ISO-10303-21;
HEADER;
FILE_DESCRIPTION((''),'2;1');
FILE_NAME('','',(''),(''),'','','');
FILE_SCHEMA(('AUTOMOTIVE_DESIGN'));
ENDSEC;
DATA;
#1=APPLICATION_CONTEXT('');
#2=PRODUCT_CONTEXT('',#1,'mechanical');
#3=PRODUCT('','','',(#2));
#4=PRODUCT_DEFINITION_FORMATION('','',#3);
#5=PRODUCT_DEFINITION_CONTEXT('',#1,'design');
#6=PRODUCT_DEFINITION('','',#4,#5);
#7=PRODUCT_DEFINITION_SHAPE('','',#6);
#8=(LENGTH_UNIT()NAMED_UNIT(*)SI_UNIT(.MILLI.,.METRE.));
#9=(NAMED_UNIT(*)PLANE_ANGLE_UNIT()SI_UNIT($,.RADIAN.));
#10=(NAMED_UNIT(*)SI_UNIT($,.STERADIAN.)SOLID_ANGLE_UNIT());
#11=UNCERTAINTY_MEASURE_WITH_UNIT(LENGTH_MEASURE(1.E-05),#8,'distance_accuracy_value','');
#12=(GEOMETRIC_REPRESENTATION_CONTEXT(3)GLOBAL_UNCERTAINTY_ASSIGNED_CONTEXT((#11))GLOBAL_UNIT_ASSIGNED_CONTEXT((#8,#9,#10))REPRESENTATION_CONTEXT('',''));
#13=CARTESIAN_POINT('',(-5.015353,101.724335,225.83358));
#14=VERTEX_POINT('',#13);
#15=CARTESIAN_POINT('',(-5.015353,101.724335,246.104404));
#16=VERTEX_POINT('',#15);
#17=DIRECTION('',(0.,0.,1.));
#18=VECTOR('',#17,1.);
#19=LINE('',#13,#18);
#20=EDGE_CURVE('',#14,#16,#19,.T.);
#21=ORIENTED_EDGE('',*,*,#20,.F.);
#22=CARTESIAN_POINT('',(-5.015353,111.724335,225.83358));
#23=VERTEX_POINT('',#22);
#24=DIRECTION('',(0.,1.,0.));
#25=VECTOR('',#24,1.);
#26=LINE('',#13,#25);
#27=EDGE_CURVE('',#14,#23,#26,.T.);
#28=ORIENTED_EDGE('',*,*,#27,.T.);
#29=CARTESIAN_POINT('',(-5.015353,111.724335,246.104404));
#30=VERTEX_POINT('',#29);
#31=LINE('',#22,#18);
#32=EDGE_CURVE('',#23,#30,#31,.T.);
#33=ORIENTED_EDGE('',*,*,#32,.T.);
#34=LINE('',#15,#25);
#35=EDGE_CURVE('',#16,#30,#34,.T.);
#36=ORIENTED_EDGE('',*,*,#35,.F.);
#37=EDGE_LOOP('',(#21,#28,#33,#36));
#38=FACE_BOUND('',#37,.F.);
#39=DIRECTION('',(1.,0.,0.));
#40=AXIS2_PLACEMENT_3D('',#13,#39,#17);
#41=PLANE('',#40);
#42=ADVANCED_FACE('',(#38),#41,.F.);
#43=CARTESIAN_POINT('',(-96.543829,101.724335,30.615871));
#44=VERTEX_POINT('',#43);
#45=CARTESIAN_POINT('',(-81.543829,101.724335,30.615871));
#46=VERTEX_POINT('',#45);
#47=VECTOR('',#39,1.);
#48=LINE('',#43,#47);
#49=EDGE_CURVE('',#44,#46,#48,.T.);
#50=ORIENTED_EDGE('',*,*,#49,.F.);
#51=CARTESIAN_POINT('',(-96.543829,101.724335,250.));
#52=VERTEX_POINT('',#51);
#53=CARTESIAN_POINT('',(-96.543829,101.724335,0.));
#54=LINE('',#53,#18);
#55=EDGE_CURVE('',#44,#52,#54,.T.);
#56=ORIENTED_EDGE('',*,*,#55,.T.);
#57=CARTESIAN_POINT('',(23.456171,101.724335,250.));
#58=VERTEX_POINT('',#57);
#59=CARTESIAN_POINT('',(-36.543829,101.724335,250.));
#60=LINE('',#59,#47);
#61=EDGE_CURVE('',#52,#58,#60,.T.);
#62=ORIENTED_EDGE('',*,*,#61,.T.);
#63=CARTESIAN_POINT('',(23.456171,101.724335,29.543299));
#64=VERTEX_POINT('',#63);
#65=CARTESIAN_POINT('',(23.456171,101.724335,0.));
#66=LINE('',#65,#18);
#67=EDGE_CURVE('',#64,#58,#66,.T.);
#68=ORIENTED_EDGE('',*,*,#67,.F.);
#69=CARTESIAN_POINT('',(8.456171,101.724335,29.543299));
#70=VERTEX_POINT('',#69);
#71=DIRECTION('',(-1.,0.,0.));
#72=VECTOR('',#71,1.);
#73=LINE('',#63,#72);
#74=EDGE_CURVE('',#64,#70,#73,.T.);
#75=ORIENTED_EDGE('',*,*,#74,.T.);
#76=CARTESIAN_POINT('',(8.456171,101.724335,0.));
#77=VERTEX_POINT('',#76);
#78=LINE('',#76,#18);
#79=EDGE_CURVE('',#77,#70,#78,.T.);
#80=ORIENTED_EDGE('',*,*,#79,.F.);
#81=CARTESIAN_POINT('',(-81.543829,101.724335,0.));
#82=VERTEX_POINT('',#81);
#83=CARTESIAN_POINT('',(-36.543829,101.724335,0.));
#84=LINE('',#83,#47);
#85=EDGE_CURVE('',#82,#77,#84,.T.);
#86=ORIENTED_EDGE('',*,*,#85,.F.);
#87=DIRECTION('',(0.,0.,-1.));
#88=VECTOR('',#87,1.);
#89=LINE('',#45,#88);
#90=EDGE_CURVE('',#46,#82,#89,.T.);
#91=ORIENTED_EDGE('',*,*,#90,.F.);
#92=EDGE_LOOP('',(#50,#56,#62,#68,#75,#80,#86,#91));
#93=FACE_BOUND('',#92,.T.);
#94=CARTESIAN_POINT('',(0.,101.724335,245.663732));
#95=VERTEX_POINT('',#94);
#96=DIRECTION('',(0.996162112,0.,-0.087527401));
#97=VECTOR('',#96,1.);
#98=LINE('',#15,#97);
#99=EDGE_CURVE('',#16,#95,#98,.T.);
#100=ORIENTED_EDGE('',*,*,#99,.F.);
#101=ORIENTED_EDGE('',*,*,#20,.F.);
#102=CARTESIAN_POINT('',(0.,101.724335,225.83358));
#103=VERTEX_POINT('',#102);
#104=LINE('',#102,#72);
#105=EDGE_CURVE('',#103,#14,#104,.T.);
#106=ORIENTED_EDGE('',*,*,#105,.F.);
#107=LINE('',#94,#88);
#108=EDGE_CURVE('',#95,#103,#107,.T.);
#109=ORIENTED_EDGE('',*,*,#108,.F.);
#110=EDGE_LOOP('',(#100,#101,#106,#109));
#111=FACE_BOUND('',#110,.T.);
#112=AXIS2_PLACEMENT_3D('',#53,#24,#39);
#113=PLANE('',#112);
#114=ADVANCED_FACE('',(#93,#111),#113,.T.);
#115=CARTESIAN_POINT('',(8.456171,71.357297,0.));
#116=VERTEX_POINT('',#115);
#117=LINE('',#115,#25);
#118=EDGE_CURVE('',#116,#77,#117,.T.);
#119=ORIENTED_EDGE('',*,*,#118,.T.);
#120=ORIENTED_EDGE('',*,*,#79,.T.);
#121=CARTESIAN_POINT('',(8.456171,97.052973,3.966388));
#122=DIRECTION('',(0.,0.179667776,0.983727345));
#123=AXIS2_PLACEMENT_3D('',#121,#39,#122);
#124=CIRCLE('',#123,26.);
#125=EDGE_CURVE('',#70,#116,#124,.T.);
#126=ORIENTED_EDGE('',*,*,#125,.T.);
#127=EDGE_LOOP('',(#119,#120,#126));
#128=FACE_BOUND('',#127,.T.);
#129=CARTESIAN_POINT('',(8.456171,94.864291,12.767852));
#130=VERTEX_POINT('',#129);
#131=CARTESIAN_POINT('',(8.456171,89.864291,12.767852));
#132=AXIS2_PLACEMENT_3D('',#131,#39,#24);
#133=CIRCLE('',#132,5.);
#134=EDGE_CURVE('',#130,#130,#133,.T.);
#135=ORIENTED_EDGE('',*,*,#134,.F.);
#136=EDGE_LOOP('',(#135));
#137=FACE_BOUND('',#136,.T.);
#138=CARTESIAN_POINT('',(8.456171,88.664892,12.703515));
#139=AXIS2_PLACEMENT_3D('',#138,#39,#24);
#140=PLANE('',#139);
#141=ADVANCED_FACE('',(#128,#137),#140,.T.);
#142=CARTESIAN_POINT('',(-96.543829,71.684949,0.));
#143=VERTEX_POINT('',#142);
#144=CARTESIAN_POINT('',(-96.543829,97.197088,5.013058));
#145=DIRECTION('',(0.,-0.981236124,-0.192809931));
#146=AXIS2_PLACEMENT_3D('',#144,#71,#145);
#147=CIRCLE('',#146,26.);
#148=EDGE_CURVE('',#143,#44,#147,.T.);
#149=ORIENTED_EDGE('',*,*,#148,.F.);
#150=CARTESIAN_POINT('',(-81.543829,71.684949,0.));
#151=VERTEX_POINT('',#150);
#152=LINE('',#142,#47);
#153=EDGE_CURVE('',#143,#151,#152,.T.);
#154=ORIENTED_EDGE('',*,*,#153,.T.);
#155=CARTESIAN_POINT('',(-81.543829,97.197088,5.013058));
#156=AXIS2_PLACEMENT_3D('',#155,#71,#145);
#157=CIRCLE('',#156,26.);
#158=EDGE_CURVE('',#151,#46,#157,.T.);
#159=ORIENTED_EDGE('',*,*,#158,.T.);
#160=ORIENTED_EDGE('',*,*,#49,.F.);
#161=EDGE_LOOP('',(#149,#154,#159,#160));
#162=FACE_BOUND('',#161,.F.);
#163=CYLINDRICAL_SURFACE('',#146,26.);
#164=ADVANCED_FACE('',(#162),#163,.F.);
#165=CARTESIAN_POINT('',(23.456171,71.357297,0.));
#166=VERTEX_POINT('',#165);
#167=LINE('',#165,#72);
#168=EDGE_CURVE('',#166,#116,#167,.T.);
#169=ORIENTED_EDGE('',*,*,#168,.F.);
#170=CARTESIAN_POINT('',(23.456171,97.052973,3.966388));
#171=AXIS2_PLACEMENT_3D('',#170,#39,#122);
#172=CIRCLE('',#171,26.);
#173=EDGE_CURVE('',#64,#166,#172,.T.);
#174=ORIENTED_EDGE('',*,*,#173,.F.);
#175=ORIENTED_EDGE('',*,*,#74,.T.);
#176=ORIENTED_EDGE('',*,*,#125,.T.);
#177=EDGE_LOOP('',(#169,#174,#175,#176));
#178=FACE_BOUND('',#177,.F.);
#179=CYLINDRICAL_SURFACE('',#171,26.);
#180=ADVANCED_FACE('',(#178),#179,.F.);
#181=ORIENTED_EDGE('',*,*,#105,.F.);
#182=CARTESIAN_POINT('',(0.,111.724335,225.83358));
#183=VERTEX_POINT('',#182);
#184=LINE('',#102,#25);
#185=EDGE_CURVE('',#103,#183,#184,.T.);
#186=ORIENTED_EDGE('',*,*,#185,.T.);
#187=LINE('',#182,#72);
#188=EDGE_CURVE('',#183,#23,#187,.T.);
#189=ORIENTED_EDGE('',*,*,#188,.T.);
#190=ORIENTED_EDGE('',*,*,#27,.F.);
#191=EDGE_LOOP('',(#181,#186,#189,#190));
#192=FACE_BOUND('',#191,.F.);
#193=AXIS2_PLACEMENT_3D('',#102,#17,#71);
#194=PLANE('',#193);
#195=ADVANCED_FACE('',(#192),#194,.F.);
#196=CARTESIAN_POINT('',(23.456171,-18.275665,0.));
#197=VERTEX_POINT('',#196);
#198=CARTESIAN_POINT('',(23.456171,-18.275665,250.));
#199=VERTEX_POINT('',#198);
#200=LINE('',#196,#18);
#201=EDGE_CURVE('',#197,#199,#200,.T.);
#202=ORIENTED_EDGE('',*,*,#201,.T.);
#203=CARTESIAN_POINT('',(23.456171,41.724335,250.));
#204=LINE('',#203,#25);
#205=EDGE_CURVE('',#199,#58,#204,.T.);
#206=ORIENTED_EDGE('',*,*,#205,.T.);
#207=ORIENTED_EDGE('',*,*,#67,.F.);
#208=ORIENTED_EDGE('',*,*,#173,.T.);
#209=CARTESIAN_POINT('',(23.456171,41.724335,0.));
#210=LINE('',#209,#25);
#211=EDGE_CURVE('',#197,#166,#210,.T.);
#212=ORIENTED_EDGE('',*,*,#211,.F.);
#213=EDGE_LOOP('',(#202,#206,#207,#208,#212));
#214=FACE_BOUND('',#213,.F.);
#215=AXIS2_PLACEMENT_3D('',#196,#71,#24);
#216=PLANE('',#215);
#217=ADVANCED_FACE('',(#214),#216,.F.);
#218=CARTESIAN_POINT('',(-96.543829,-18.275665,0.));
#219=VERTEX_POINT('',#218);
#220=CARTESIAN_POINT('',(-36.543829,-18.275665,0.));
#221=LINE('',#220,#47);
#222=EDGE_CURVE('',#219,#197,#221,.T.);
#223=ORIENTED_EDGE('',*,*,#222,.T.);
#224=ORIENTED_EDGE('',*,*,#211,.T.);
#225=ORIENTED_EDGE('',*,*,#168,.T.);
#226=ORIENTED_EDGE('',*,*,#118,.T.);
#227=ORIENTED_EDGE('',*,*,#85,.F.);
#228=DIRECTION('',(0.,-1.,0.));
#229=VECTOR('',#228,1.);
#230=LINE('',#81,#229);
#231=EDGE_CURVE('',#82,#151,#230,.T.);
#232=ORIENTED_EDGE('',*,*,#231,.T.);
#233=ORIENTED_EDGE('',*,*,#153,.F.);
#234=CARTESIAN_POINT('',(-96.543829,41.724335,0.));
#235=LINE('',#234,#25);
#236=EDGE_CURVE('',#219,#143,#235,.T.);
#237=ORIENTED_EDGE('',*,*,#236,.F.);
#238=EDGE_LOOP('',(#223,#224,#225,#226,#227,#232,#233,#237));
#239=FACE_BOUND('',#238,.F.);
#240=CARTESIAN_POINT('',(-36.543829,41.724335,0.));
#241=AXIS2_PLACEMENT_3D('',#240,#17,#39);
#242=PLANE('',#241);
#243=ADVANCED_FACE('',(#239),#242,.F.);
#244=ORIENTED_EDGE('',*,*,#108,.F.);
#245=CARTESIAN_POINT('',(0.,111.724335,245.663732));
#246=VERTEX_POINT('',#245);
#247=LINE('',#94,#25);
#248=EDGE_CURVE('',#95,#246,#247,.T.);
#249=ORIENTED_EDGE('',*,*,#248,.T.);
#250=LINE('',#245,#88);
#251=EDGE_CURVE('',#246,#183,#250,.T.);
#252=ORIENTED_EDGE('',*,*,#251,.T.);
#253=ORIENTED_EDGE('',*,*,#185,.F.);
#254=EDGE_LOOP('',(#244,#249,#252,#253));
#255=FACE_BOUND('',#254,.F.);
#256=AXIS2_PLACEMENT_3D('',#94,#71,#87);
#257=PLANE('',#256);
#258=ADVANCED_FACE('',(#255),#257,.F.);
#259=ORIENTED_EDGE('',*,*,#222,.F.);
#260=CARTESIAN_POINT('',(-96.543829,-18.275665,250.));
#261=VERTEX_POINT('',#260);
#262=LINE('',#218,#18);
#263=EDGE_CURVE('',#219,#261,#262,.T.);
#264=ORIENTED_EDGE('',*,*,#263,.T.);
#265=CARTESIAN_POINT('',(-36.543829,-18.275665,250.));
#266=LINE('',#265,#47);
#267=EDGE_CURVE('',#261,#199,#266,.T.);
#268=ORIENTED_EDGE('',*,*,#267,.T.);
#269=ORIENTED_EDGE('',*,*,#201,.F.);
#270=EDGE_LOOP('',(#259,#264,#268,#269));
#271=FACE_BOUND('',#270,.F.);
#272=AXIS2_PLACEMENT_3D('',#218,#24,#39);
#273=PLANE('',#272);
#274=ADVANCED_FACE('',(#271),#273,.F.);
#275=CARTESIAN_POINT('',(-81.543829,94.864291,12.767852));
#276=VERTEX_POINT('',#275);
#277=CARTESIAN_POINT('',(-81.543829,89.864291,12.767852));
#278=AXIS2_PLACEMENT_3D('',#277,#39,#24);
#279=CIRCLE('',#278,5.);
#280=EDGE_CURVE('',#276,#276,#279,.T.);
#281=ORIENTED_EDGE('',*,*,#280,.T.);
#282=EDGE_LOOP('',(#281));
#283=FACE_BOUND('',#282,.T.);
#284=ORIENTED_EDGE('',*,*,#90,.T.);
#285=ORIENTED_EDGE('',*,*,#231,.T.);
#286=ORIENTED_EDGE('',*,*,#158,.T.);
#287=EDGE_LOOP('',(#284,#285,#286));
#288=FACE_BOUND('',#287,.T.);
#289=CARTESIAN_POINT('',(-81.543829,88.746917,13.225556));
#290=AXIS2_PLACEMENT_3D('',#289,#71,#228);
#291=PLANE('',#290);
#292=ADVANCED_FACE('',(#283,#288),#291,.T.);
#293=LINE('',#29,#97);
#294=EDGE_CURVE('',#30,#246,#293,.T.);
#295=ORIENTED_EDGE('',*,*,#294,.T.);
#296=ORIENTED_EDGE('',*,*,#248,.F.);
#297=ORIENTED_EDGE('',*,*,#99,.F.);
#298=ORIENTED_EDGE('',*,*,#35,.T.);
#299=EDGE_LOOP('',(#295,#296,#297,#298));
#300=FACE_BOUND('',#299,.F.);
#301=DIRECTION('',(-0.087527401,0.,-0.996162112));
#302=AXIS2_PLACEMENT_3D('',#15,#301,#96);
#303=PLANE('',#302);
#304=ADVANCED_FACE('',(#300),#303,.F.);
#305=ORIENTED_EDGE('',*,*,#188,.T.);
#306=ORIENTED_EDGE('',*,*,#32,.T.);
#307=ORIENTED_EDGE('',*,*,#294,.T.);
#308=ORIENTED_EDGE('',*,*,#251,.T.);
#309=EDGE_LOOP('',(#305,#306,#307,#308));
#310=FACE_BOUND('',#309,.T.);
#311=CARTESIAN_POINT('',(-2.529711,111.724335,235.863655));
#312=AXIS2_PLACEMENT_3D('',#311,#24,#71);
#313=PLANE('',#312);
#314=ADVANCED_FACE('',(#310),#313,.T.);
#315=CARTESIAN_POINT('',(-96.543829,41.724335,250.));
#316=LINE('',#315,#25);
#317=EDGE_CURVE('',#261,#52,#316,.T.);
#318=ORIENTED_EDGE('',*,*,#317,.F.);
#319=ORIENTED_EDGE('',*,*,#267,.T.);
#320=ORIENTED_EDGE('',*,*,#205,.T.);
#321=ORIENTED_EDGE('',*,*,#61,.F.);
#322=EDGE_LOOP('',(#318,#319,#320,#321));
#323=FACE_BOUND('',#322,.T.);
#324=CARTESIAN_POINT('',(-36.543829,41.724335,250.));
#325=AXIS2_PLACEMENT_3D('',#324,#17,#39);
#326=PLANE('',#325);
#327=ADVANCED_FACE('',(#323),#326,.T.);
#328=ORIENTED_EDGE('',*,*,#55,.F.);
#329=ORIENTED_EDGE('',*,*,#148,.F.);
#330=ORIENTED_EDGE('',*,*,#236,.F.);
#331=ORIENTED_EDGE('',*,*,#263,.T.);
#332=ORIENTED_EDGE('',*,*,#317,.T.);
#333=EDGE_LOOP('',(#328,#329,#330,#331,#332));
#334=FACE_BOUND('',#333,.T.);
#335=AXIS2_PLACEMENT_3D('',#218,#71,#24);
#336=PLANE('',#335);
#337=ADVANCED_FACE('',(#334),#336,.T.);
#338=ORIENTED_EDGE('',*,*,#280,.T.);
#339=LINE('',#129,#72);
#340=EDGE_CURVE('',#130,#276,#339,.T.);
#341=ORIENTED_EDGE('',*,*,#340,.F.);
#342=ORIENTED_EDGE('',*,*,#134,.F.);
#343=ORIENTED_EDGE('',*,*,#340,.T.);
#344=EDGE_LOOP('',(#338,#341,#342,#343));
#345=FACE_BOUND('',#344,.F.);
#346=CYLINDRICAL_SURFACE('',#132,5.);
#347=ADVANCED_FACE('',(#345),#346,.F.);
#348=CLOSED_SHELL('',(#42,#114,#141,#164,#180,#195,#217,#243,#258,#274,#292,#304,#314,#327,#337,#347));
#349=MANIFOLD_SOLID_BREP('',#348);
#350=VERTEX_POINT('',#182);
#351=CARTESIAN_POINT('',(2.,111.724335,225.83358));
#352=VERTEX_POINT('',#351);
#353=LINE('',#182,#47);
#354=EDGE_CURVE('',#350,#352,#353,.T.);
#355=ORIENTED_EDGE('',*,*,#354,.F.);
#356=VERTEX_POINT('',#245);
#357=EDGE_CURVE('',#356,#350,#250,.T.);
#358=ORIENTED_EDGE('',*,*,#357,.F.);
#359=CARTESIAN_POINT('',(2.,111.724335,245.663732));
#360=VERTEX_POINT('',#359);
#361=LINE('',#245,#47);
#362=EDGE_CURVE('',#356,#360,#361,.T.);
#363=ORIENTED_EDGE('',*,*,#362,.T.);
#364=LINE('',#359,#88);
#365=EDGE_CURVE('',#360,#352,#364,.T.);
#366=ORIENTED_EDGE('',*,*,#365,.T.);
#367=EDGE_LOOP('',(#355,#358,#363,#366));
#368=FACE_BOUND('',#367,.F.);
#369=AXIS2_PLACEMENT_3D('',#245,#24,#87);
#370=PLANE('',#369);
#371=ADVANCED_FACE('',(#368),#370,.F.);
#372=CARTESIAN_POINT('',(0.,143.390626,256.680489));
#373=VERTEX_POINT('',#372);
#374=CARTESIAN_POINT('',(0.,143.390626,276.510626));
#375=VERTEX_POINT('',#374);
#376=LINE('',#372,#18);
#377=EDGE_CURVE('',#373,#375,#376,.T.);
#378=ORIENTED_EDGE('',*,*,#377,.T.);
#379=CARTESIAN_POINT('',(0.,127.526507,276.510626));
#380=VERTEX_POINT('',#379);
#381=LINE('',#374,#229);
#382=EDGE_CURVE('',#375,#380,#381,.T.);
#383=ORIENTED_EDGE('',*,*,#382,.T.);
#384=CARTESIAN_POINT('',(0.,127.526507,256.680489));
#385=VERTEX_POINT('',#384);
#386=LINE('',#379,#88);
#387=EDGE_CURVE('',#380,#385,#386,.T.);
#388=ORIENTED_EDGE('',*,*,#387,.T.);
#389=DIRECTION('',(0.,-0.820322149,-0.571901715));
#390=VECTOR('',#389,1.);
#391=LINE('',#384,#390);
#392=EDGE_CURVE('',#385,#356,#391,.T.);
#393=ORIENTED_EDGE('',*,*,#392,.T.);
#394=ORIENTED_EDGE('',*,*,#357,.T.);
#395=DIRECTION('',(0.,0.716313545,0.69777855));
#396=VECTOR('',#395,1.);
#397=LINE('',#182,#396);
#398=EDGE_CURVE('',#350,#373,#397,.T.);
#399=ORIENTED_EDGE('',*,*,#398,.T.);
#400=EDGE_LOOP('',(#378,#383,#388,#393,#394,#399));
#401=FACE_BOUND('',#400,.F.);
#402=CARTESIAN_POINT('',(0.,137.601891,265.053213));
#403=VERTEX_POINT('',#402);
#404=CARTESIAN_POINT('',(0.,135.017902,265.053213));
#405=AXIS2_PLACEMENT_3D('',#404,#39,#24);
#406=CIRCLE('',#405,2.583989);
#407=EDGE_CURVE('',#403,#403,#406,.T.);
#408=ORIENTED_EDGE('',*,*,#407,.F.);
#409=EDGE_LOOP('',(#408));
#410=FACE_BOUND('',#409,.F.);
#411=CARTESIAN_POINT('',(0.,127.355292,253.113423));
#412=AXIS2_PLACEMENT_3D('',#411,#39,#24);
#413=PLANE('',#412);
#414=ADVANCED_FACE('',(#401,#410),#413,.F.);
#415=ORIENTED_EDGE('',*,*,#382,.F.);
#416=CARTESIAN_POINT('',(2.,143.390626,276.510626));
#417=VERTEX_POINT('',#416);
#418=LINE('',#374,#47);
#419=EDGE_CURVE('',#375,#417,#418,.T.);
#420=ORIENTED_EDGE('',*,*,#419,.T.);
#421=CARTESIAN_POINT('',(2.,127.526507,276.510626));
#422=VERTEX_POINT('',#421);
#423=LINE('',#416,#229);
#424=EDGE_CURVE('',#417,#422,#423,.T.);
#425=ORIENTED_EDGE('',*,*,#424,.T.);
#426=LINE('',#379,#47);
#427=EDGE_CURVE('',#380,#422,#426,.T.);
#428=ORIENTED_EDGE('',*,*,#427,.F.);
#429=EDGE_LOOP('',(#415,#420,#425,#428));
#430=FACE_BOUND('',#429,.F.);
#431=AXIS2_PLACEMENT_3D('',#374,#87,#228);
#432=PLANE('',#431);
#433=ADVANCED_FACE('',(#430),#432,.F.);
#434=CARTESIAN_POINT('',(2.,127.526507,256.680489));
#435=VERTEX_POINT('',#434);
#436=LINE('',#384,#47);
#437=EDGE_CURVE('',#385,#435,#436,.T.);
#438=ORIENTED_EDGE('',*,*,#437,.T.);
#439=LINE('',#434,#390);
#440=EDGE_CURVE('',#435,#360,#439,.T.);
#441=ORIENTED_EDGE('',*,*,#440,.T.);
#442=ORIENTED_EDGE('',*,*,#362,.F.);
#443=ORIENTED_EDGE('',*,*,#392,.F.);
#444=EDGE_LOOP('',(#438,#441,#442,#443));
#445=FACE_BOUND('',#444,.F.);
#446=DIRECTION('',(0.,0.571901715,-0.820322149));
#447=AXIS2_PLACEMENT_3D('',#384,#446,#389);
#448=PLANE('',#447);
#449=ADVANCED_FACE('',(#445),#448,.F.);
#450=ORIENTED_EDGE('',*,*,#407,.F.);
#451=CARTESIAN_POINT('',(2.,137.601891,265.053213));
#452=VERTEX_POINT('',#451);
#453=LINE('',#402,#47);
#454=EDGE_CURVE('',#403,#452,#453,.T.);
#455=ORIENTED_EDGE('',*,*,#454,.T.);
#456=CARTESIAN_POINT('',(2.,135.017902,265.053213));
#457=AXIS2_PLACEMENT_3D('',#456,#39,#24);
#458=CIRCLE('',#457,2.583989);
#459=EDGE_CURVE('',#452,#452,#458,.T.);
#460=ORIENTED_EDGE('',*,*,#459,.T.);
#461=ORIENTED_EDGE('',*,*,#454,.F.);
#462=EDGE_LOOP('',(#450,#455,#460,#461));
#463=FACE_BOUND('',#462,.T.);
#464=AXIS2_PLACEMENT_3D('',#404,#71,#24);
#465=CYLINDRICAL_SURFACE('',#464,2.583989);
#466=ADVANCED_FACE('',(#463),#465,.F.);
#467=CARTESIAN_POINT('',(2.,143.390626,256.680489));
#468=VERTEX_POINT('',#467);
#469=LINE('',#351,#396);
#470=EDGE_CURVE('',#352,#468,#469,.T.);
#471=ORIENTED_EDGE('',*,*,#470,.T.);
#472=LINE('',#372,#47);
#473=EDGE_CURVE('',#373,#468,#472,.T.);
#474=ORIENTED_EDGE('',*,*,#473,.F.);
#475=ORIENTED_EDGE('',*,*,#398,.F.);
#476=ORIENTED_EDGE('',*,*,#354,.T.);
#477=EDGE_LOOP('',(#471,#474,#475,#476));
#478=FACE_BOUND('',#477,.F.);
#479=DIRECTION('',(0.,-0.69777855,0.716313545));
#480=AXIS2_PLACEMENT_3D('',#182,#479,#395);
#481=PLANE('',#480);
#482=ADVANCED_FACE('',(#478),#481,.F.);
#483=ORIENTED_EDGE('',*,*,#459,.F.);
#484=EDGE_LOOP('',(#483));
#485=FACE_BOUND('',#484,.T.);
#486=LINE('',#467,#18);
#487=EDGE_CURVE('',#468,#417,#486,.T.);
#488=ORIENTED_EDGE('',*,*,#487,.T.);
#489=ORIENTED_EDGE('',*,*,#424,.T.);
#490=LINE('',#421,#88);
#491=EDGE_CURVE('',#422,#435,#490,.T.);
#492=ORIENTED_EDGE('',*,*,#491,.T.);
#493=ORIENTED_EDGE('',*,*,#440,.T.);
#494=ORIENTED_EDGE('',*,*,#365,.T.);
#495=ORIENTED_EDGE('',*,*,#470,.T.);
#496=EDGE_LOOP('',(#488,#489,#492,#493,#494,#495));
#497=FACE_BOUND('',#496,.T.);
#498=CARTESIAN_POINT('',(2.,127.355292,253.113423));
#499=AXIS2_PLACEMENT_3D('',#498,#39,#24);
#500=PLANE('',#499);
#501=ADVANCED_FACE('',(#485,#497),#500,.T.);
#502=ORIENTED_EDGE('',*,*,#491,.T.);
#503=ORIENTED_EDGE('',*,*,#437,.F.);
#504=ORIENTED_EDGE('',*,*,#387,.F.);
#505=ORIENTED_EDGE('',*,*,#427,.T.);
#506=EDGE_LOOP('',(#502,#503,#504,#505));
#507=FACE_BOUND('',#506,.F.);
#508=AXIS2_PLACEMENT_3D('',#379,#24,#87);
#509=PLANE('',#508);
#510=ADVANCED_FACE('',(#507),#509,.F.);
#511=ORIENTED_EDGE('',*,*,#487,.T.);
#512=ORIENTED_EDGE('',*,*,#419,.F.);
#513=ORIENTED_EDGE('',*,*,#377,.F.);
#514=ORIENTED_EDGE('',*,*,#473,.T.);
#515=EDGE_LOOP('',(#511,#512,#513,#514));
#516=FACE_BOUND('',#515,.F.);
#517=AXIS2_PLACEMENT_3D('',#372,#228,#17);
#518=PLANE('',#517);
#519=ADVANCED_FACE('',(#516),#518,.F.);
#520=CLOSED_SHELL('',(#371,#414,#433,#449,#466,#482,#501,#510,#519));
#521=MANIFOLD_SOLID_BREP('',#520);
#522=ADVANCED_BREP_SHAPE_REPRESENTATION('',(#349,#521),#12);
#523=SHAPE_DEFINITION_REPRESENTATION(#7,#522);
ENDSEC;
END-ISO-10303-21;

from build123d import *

# Parameters (mm, degrees)
F0_W      = 120
F0_H      = 120
F1_DEPTH  = 250
F4_DEPTH  = 15
F5_DEPTH  = 15
F6_R      = 5
F7_DEPTH  = 90
F11_DEPTH = 10
F12_R     = 2.5839894192
F13_DEPTH = 2


# Not quite as in the source:
# - the program builds the solid bodies; features that only make, move or delete a surface that nothing else refers to are left out


with BuildPart() as f1:
    # F0 (on Top) → F1 (new body)
    with BuildSketch(Plane.XY):
        with Locations((-36.543828845, 41.7243348807)):
            Rectangle(F0_W, F0_H)
    extrude(amount=F1_DEPTH)

    # F3 (on face) → F4 (cut)
    with BuildSketch(Plane(origin=(-96.543828845, 0, 0), x_dir=(0, -1, 0), z_dir=(-1, 0, 0))):
        with BuildLine():
            Line((-101.7243348807, 0), (-71.6849491, 0))
            ThreePointArc((-71.6849491, 0), (-78.6384158471, 23.222277743), (-101.7243348807, 30.6158713042))
            Line((-101.7243348807, 30.6158713042), (-101.7243348807, 0))
        make_face()
    extrude(amount=-F4_DEPTH, mode=Mode.SUBTRACT)

    # F2 (on face) → F5 (cut)
    with BuildSketch(Plane.YZ.offset(23.456171155)):
        with BuildLine():
            Line((101.7243348807, 0), (101.7243348807, 29.543299228))
            ThreePointArc((101.7243348807, 29.543299228), (78.9226920916, 22.6021851134), (71.3572967199, 0))
            Line((71.3572967199, 0), (101.7243348807, 0))
        make_face()
    extrude(amount=-F5_DEPTH, mode=Mode.SUBTRACT)

    # F6 (on face) → F7 (cut)
    with BuildSketch(Plane.YZ.offset(8.456171155)):
        with Locations((89.8642912507, 12.767852284)):
            Circle(F6_R)
    extrude(amount=-F7_DEPTH, mode=Mode.SUBTRACT)

    # F10 (on face) → F11 (join)
    with BuildSketch(Plane(origin=(0, 101.7243348807, 0), x_dir=(-1, 0, 0), z_dir=(0, 1, 0))):
        Polygon((5.0153527409, 246.1044043303), (0, 245.6637322903), (0, 225.8335798979), (5.0153527409, 225.8335798979), align=None)
    extrude(amount=F11_DEPTH)


with BuildPart() as f13:
    # F12 (on face) → F13 (new body)
    with BuildSketch(Plane.YZ):
        Polygon((111.7243348807, 245.6637322903), (111.7243348807, 225.8335798979), (143.3906257153, 256.6804885864), (143.3906257153, 276.5106260777), (127.5265067816, 276.5106260777), (127.5265067816, 256.6804885864), align=None)
        with Locations((135.017901659, 265.0532126427)):
            Circle(F12_R, mode=Mode.SUBTRACT)
    extrude(amount=F13_DEPTH)


solid = Compound([f1.part, f13.part])
